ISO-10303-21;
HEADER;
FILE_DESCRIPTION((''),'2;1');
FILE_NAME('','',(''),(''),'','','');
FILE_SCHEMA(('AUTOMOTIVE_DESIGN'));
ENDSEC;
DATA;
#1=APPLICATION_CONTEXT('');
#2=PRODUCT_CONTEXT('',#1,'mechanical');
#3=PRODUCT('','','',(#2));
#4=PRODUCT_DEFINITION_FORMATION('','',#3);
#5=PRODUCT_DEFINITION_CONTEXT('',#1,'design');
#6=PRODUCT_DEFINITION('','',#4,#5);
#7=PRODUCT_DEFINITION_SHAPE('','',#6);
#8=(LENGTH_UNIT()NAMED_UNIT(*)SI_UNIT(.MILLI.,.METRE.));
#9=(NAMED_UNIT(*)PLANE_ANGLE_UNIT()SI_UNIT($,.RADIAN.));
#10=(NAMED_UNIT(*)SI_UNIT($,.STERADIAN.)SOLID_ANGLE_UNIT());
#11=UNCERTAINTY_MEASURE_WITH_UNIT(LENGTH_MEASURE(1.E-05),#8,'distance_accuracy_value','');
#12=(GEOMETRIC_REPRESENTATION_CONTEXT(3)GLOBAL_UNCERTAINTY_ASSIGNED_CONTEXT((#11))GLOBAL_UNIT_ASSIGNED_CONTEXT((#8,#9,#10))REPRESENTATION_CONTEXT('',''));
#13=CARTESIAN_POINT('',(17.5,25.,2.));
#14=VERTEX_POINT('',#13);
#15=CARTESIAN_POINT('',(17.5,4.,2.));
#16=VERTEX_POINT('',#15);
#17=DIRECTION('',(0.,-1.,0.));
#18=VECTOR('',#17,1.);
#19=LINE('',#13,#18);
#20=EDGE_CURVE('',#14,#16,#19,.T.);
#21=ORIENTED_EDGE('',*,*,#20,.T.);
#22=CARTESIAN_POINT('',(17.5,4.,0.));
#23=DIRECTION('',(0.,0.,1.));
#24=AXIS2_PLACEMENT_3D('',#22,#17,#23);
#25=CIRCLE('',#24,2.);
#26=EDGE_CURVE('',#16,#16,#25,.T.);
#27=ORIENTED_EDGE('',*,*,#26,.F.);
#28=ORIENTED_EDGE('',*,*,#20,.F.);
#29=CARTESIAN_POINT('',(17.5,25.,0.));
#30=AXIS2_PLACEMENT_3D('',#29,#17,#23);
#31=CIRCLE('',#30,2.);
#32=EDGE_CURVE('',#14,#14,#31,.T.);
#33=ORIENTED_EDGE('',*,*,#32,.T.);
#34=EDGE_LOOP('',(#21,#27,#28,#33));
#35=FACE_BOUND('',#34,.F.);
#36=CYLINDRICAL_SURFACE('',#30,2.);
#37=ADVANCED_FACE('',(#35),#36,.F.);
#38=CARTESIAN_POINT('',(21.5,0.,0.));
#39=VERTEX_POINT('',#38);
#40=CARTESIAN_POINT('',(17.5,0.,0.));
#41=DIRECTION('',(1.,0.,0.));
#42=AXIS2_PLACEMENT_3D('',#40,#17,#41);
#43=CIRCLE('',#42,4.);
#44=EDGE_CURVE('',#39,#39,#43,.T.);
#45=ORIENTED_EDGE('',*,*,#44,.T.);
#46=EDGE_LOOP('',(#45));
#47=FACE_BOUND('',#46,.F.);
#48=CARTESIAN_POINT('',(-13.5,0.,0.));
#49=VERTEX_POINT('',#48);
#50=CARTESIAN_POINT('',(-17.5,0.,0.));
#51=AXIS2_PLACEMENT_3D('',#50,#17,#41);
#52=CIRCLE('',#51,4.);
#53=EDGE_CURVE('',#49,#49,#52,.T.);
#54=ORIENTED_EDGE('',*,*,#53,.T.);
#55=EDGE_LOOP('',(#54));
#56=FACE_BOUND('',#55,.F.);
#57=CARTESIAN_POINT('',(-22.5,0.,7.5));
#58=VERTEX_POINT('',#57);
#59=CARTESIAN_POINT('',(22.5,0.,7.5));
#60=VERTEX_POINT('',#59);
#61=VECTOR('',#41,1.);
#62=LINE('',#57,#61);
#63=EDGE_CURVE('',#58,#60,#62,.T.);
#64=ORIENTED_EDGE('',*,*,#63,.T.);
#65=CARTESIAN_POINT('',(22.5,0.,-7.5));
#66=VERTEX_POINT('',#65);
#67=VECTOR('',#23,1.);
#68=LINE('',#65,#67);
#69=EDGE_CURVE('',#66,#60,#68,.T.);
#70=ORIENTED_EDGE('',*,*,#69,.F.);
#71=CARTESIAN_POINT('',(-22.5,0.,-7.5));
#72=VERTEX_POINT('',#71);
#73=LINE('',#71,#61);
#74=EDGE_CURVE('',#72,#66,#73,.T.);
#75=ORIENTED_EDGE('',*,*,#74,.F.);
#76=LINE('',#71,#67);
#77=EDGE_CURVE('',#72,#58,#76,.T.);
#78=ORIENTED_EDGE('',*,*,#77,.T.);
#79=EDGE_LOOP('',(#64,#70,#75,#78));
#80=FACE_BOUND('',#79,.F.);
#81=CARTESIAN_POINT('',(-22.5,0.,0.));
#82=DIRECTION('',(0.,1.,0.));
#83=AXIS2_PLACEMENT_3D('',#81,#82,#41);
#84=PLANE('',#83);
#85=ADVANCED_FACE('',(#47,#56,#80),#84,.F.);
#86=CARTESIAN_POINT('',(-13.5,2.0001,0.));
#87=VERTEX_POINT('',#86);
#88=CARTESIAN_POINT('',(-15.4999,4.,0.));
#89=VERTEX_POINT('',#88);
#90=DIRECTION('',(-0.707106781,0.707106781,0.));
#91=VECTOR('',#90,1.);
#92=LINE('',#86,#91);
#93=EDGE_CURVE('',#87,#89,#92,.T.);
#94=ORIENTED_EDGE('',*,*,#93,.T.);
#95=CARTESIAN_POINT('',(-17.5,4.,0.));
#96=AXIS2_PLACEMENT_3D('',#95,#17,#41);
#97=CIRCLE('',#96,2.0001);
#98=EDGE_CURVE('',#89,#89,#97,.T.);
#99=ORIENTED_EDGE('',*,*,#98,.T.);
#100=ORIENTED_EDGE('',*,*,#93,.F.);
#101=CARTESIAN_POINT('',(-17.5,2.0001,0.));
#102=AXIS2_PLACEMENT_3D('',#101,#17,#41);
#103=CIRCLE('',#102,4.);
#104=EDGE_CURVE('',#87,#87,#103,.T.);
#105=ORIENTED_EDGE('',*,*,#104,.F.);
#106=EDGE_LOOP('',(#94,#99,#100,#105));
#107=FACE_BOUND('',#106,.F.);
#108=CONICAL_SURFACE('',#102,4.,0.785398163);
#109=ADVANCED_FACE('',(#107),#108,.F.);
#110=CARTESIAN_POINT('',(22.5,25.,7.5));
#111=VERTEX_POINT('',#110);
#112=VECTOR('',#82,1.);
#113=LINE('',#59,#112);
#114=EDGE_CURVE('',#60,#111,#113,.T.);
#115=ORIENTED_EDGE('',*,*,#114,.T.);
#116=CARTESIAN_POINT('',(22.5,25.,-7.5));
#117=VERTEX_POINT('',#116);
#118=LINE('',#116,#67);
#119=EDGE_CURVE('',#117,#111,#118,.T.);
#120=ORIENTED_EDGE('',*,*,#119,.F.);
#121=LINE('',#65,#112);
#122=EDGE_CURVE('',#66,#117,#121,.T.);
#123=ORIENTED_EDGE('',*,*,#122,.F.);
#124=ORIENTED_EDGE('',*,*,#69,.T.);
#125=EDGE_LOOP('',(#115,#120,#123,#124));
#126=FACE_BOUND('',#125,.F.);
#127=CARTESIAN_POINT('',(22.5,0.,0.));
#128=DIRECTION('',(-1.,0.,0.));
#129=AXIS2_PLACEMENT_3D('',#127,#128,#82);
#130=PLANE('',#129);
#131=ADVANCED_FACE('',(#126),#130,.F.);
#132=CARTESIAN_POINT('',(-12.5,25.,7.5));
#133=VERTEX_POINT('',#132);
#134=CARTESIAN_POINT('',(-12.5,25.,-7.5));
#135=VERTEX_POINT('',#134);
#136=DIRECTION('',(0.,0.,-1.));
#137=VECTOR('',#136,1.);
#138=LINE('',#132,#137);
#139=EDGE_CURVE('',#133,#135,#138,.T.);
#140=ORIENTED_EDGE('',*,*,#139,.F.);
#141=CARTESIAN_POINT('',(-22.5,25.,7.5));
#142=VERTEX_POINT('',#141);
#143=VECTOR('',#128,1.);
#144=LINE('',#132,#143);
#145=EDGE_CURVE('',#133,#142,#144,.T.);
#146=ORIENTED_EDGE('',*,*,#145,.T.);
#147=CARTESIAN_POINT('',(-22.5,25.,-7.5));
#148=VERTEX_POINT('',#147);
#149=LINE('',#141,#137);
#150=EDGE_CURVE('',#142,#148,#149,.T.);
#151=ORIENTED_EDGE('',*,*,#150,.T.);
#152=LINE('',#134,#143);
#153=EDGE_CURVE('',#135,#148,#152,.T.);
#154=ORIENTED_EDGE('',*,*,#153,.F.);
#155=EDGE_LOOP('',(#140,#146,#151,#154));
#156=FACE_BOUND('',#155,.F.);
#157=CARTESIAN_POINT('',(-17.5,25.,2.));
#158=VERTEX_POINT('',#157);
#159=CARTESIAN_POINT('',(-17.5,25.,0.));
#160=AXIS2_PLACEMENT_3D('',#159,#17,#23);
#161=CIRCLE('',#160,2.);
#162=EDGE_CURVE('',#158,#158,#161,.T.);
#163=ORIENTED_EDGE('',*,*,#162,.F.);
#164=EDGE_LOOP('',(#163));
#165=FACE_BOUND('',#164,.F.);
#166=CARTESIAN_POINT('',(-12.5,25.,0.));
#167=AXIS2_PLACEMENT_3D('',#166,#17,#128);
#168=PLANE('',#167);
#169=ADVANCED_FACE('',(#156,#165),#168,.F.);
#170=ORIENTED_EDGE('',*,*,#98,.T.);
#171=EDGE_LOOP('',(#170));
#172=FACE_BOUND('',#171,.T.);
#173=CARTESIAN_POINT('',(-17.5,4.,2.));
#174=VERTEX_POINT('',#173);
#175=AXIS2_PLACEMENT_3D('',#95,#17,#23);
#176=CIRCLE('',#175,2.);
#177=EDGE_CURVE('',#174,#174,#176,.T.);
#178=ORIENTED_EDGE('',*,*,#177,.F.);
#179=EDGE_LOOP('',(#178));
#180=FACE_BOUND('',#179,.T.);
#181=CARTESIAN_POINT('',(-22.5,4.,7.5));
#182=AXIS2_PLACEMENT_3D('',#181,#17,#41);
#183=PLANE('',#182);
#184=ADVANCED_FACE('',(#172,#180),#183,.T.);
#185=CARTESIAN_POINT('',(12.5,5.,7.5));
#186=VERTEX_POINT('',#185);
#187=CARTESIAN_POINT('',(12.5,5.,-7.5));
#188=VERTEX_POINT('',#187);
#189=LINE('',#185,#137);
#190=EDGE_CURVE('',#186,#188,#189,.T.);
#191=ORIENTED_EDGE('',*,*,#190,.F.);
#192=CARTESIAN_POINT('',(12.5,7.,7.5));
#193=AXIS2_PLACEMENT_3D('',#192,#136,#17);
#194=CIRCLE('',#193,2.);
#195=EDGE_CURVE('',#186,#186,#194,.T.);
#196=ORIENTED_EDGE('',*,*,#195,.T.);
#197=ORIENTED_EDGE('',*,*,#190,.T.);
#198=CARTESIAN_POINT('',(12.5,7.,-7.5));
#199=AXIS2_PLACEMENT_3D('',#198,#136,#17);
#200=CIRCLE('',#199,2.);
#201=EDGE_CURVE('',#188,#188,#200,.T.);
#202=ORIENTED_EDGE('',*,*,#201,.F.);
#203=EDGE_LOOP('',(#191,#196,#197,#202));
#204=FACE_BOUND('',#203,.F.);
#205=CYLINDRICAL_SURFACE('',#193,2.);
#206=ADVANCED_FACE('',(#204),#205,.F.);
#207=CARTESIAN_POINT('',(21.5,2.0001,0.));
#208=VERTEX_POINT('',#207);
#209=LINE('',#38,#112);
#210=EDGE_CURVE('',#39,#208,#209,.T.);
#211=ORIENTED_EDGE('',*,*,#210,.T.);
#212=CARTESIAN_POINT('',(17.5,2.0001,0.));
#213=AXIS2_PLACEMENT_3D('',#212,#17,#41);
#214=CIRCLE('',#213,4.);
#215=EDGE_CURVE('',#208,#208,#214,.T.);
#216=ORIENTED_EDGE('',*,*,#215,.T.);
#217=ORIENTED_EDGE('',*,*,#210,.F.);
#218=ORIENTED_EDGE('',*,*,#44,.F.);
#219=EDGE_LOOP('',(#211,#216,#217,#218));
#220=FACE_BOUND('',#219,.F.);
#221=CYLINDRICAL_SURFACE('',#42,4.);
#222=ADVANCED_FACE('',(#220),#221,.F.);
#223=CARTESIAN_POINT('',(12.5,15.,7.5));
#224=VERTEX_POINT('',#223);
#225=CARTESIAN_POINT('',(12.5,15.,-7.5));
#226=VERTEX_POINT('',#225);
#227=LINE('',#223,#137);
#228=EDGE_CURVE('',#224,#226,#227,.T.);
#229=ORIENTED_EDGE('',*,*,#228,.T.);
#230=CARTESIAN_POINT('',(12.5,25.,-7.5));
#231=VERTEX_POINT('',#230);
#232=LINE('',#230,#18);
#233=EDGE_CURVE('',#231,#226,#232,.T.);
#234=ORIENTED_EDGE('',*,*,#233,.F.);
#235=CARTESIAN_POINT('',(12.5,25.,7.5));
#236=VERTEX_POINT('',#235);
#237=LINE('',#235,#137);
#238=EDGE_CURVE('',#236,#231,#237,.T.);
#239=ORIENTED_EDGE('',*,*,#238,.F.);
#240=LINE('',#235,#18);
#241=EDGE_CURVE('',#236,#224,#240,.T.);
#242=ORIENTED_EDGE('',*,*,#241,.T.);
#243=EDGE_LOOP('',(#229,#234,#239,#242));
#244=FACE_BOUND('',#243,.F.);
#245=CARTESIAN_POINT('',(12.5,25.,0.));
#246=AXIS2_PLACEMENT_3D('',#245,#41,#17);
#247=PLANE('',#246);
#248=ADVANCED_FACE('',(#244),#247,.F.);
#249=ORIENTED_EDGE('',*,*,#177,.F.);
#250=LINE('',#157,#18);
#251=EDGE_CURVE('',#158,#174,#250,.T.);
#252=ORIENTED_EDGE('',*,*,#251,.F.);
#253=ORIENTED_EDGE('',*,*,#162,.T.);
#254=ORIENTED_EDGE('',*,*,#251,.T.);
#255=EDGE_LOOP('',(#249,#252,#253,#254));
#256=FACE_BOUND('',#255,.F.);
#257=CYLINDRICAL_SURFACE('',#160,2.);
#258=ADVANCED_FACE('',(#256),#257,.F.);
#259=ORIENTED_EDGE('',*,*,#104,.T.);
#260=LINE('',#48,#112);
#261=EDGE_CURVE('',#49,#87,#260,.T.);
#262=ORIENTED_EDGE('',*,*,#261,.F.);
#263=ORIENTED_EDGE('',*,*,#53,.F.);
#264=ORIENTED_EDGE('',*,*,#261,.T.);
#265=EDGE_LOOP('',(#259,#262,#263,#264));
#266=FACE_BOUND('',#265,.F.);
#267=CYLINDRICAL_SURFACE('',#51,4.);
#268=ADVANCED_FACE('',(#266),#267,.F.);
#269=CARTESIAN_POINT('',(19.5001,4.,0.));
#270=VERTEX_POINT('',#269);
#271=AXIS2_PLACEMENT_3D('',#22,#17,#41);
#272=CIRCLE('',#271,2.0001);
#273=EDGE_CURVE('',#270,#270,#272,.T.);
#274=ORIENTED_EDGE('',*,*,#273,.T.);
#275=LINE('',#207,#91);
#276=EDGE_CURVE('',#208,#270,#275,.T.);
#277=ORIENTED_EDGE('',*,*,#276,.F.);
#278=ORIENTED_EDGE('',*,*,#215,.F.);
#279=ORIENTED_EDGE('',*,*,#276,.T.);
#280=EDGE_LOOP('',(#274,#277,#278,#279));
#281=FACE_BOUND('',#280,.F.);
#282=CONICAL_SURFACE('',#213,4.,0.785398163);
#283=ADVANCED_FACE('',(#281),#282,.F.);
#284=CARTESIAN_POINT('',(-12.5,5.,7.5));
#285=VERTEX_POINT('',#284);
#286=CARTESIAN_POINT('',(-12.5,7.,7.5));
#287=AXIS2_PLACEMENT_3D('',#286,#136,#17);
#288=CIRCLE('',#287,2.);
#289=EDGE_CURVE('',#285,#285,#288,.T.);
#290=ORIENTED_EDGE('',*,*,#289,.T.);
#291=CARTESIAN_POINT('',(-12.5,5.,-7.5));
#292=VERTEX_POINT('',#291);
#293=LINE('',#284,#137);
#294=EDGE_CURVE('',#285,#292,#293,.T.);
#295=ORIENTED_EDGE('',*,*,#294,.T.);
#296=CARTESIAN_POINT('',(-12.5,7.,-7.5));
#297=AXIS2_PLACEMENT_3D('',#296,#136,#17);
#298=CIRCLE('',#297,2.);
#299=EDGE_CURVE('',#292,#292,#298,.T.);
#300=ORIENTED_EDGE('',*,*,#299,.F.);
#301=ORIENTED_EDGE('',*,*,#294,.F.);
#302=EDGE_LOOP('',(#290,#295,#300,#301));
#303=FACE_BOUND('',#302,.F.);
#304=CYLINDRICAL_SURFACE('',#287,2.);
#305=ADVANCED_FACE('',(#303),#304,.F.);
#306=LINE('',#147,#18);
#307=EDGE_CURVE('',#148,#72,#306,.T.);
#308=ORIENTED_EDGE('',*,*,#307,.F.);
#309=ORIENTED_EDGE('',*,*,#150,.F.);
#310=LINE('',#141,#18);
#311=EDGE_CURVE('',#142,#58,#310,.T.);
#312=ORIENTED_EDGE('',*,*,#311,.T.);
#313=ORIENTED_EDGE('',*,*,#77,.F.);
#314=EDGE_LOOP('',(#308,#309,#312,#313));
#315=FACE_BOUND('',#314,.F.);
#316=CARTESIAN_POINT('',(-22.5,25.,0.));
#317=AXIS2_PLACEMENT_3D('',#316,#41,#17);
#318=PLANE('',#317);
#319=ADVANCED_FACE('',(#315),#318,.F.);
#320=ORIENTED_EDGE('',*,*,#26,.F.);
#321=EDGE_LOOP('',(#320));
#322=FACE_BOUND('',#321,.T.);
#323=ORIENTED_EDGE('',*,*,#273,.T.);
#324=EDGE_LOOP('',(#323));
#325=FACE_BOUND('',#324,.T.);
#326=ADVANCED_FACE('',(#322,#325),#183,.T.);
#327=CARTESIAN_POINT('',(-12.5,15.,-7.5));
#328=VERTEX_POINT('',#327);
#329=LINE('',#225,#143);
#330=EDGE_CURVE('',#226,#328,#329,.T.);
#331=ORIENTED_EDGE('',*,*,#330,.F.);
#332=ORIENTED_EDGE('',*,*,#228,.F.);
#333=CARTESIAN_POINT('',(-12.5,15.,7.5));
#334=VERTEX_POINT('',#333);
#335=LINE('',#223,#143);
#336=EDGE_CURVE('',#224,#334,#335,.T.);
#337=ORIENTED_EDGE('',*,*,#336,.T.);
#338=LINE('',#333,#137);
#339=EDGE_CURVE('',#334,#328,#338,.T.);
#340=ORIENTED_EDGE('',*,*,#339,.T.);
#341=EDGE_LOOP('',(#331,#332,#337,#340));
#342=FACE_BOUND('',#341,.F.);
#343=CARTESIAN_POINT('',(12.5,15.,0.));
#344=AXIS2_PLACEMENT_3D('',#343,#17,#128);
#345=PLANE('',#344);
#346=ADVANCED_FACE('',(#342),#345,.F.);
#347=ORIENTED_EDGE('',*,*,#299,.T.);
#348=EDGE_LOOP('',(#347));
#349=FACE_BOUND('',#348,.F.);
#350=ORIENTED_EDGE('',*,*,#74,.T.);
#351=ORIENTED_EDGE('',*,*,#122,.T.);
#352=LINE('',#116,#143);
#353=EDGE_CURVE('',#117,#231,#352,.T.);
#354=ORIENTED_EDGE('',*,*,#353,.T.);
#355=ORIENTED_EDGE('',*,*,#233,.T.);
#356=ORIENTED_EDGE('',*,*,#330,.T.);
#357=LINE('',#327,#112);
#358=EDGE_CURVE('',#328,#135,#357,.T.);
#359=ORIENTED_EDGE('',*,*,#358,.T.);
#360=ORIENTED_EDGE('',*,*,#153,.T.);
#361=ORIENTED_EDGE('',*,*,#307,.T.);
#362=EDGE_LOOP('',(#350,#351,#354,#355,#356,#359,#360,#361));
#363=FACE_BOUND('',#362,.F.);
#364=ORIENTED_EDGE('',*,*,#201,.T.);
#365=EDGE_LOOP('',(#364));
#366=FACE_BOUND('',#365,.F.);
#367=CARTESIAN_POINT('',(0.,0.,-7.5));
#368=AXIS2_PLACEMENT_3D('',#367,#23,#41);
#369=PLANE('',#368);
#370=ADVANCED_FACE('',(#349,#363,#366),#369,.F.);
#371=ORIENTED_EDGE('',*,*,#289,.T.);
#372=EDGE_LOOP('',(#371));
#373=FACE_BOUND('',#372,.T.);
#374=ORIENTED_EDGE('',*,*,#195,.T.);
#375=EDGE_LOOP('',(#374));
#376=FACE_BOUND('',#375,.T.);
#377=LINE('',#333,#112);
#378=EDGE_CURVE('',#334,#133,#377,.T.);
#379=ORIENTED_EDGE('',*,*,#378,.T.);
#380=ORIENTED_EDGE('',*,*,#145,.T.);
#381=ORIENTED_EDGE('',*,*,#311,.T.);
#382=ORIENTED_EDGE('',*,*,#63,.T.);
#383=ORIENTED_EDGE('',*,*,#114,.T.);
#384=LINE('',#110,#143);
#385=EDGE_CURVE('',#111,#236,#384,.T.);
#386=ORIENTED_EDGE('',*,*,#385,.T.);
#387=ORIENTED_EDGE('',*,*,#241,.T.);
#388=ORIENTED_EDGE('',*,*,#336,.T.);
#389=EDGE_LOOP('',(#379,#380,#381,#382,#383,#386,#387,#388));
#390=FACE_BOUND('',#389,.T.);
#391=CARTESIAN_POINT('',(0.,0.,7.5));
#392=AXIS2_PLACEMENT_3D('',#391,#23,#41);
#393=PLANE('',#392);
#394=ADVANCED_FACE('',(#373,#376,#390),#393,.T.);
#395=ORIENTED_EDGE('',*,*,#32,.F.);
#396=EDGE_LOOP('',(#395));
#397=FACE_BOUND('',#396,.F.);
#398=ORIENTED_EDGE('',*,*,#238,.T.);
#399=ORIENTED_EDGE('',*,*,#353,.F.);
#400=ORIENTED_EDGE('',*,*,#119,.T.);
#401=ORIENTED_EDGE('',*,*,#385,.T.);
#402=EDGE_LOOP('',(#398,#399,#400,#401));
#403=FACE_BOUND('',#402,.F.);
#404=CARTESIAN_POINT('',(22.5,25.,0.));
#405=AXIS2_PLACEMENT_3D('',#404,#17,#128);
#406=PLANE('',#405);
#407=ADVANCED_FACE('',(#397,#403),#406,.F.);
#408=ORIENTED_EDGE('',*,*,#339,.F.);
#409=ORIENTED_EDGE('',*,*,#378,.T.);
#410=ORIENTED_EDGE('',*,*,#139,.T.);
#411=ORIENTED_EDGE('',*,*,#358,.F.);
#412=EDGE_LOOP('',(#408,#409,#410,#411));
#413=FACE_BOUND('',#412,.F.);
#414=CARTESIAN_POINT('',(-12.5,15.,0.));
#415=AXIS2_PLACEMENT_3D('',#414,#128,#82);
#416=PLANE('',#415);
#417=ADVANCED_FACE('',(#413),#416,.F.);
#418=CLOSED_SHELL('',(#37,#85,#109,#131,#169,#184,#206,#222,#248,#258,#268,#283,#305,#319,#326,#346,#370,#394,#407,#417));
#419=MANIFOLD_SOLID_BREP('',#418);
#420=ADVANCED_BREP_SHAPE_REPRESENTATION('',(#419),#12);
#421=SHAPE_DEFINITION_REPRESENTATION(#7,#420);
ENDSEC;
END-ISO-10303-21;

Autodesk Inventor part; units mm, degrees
ref_plane "YZ Plane" through (0, 0, 0) normal (1, 0, 0) x (0, 1, 0)
ref_plane "XZ Plane" through (0, 0, 0) normal (0, 1, 0) x (-1, 0, 0)
ref_plane "XY Plane" through (0, 0, 0) normal (0, 0, 1) x (1, 0, 0)
sketch "Sketch1" plane through (0, 0, 0) normal (0, 0, 1) x (1, 0, 0)
  line L0 (-22.5, 0) -> (22.5, 0)
  line L1 (22.5, 0) -> (22.5, 25)
  line L2 (22.5, 25) -> (12.5, 25)
  line L3 (12.5, 25) -> (12.5, 15)
  line L4 (12.5, 15) -> (-12.5, 15)
  line L5 (-12.5, 15) -> (-12.5, 25)
  line L6 (-12.5, 25) -> (-22.5, 25)
  line L7 (-22.5, 25) -> (-22.5, 0)
  point P0 (0, 0)
  point P1 (0, 0)
  dimension "d0" = 45
  dimension "d1" = 25
  dimension "d2" = 10
  dimension "d3" = 10
extrude "Extrusion1" add sketch "Sketch1" along normal mid plane 15
sketch "Sketch2" plane through (12.5, 25, -7.5) normal (0, 1, 0) x (1, 0, 0)
  line L0 (0, 0) -> (10, 0) projected
  line L1 (0, 0) -> (0, -15) projected
  line L2 (10, -15) -> (0, -15) projected
  line L3 (10, 0) -> (10, -15) projected
  line L4 (-35, 0) -> (-25, 0) projected
  line L5 (-35, 0) -> (-35, -15) projected
  line L6 (-25, -15) -> (-35, -15) projected
  line L7 (-25, 0) -> (-25, -15) projected
  line L8 (-25, 0) -> (-25, -15) projected
  line L9 (5, -7.5) -> (-30, -7.5)
  point P0 (-12.5, -7.5)
  point P1 (-12.5, -7.5)
  dimension "d6" = 35
hole "Hole1" at (17.5, 25, 0) at (-17.5, 25, 0) direction (0, -1, 0) diameter 4 end through all
sketch "Sketch3" plane through (0, 0, 7.5) normal (0, 0, 1) x (1, 0, 0)
  line L0 (12.5, 7) -> (-12.5, 7) construction
  line L1 (0, 0) -> (0, 14) construction
  line L2 (12.5, 15) -> (-12.5, 15) projected
  point P0 (0, 7)
  dimension "d14" = 8
  dimension "d15" = 25
hole "Hole2" at (12.5, 7, 7.5) at (-12.5, 7, 7.5) direction (0, 0, -1) diameter 4 end through all
sketch "Sketch4" plane through (-22.5, 0, 7.5) normal (0, -1, 0) x (1, 0, 0)
  circle A0 centre (5, -7.5) radius 4
  circle A1 centre (40, -7.5) radius 4
  dimension "d23" = 8
  dimension "d24" = 8
extrude "Extrusion2" cut sketch "Sketch4" against normal blind 4
chamfer "Chamfer1" distance 2 angle 45 2 edges at (-21.5, 4, 0) (13.5, 4, 0)
equation "\"d24\" = d23"
properties part number "sujetador inferior"
